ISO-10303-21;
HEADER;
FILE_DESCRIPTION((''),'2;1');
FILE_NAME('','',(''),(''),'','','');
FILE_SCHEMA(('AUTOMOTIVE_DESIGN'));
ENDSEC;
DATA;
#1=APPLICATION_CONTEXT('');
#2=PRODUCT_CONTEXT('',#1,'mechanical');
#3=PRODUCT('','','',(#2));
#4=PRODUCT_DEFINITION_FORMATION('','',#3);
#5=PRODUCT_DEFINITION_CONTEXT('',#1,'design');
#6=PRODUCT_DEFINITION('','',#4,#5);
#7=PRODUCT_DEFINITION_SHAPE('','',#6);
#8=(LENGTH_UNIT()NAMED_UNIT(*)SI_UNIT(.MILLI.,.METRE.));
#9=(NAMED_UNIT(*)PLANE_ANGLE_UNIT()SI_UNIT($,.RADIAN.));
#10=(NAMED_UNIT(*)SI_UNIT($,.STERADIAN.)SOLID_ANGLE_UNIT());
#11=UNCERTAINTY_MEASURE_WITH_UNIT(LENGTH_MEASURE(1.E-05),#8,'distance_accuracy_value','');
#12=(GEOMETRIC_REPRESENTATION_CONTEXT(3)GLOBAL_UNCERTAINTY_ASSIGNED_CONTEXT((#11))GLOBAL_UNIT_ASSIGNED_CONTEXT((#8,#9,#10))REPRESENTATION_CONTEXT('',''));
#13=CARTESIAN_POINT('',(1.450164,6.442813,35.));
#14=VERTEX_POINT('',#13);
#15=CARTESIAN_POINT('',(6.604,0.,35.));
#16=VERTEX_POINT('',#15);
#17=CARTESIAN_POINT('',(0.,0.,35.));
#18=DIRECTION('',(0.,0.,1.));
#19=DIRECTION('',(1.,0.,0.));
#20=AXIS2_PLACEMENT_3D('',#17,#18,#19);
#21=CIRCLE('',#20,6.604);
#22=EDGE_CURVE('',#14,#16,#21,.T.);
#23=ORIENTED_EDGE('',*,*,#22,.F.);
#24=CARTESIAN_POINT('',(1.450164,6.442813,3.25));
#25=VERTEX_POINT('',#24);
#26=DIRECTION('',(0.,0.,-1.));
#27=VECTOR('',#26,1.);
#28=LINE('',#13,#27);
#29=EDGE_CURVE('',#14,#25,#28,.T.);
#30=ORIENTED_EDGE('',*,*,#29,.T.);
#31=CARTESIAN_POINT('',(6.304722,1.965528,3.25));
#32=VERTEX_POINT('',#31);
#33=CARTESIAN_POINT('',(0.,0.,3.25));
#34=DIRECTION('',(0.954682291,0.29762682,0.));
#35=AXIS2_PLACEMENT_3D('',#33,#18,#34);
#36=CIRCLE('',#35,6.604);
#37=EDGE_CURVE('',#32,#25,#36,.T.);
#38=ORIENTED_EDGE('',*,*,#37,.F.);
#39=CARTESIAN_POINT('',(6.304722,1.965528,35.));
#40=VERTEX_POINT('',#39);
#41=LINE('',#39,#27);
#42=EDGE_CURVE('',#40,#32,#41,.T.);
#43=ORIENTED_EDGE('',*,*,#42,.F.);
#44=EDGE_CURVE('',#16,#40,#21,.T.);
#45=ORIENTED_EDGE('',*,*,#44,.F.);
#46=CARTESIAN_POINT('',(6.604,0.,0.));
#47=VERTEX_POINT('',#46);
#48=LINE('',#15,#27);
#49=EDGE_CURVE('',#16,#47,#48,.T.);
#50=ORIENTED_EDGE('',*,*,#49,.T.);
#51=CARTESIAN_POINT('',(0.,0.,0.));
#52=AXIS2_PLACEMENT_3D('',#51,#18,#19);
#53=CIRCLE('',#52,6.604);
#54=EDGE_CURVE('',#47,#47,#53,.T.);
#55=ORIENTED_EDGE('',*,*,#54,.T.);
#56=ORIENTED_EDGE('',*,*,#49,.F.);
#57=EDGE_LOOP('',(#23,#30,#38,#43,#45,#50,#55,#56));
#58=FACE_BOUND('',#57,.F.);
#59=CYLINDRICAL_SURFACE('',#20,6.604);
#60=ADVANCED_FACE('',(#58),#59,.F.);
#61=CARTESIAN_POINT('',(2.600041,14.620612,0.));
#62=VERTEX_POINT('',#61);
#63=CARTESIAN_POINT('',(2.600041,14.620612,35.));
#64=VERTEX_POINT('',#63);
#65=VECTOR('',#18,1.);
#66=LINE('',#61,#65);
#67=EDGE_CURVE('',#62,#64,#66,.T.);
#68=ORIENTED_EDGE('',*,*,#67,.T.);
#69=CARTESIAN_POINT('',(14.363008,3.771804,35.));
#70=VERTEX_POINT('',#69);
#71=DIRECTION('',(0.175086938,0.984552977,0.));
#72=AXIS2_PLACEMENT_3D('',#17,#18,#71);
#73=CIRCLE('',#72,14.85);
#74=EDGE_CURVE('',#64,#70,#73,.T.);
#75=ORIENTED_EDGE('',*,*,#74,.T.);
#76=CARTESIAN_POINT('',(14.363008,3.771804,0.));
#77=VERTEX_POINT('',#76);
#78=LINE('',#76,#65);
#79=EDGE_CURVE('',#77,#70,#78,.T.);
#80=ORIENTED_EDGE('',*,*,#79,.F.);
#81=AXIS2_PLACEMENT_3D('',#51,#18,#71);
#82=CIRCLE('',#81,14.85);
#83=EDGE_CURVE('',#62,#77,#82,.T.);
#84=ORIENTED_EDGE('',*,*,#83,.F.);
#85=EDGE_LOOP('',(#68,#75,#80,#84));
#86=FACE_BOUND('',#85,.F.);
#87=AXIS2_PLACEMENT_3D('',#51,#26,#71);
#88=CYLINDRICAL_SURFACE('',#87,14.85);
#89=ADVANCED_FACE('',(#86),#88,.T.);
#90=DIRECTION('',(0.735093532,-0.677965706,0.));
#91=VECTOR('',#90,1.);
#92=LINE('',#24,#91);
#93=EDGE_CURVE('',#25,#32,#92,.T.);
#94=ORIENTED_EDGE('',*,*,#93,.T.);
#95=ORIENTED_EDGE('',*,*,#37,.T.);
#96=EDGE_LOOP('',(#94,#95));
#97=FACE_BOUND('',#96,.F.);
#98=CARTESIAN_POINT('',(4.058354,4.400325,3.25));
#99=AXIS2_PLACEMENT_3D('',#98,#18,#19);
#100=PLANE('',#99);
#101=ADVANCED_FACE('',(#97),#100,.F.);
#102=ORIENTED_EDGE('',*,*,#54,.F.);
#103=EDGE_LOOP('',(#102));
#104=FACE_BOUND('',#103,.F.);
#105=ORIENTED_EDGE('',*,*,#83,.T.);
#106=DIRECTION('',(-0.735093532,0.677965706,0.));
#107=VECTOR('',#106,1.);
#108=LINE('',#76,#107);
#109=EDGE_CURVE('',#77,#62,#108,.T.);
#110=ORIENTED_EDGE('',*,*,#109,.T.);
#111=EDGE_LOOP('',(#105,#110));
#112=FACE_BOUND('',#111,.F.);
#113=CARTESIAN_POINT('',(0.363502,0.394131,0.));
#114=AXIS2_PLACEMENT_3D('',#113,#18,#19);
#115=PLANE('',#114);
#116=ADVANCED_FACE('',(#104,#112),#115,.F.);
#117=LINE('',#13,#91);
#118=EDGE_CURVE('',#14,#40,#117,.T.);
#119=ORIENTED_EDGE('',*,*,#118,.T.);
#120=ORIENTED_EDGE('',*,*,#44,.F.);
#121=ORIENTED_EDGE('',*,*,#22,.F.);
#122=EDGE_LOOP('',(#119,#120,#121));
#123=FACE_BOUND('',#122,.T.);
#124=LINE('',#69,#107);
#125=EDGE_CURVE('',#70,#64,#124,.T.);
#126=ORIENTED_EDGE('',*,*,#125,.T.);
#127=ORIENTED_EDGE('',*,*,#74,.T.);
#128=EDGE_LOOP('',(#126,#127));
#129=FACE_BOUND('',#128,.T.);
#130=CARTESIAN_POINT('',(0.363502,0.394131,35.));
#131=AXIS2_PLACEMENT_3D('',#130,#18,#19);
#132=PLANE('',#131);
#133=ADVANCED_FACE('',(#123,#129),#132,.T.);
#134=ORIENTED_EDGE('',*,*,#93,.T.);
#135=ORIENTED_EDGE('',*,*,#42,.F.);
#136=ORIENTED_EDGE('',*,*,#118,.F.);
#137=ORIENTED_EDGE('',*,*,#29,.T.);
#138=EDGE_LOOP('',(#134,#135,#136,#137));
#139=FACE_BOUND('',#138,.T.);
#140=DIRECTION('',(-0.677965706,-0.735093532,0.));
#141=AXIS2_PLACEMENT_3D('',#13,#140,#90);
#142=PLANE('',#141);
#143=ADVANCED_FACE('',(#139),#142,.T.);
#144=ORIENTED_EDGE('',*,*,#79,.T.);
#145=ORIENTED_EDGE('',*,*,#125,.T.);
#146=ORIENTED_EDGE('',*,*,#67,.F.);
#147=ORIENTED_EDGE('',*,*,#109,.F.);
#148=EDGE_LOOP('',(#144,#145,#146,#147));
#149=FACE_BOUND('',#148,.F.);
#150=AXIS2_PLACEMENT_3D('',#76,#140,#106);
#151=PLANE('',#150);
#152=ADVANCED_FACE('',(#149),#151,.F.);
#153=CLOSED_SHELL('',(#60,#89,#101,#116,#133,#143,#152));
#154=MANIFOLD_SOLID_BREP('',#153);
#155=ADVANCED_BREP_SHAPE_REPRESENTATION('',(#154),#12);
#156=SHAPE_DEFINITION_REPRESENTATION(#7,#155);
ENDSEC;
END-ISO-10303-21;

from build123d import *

# Parameters (mm, degrees)
F1_DEPTH = 35
F2_R     = 6.604
F3_DEPTH = 38.1
F5_DEPTH = 31.75


# Not quite as in the source:
# - a feature names something its author has since deleted; it is built from what else it names


with BuildPart() as f1:
    # F0 (on Top) → F1 (new body)
    with BuildSketch(Plane.XY):
        with BuildLine():
            Line((14.3630077291, 3.7718044718), (2.6000410284, 14.6206117058))
            ThreePointArc((2.6000410284, 14.6206117058), (-10.0677907401, -10.9161389517), (14.3630077291, 3.7718044718))
        make_face()
    extrude(amount=F1_DEPTH)

    # F2 (on face) → F3 (cut)
    with BuildSketch(Plane.XY.offset(35)):
        Circle(F2_R)
    extrude(amount=-F3_DEPTH, mode=Mode.SUBTRACT)

    # F4 (on face) → F5 (join)
    with BuildSketch(Plane.XY.offset(35)):
        with BuildLine():
            ThreePointArc((6.3047218477, 1.9655275177), (4.4772855251, 4.854557686), (1.4501641617, 6.4428130428))
            Line((1.4501641617, 6.4428130428), (6.3047218477, 1.9655275177))
        make_face()
    extrude(amount=-F5_DEPTH)


solid = f1.part
